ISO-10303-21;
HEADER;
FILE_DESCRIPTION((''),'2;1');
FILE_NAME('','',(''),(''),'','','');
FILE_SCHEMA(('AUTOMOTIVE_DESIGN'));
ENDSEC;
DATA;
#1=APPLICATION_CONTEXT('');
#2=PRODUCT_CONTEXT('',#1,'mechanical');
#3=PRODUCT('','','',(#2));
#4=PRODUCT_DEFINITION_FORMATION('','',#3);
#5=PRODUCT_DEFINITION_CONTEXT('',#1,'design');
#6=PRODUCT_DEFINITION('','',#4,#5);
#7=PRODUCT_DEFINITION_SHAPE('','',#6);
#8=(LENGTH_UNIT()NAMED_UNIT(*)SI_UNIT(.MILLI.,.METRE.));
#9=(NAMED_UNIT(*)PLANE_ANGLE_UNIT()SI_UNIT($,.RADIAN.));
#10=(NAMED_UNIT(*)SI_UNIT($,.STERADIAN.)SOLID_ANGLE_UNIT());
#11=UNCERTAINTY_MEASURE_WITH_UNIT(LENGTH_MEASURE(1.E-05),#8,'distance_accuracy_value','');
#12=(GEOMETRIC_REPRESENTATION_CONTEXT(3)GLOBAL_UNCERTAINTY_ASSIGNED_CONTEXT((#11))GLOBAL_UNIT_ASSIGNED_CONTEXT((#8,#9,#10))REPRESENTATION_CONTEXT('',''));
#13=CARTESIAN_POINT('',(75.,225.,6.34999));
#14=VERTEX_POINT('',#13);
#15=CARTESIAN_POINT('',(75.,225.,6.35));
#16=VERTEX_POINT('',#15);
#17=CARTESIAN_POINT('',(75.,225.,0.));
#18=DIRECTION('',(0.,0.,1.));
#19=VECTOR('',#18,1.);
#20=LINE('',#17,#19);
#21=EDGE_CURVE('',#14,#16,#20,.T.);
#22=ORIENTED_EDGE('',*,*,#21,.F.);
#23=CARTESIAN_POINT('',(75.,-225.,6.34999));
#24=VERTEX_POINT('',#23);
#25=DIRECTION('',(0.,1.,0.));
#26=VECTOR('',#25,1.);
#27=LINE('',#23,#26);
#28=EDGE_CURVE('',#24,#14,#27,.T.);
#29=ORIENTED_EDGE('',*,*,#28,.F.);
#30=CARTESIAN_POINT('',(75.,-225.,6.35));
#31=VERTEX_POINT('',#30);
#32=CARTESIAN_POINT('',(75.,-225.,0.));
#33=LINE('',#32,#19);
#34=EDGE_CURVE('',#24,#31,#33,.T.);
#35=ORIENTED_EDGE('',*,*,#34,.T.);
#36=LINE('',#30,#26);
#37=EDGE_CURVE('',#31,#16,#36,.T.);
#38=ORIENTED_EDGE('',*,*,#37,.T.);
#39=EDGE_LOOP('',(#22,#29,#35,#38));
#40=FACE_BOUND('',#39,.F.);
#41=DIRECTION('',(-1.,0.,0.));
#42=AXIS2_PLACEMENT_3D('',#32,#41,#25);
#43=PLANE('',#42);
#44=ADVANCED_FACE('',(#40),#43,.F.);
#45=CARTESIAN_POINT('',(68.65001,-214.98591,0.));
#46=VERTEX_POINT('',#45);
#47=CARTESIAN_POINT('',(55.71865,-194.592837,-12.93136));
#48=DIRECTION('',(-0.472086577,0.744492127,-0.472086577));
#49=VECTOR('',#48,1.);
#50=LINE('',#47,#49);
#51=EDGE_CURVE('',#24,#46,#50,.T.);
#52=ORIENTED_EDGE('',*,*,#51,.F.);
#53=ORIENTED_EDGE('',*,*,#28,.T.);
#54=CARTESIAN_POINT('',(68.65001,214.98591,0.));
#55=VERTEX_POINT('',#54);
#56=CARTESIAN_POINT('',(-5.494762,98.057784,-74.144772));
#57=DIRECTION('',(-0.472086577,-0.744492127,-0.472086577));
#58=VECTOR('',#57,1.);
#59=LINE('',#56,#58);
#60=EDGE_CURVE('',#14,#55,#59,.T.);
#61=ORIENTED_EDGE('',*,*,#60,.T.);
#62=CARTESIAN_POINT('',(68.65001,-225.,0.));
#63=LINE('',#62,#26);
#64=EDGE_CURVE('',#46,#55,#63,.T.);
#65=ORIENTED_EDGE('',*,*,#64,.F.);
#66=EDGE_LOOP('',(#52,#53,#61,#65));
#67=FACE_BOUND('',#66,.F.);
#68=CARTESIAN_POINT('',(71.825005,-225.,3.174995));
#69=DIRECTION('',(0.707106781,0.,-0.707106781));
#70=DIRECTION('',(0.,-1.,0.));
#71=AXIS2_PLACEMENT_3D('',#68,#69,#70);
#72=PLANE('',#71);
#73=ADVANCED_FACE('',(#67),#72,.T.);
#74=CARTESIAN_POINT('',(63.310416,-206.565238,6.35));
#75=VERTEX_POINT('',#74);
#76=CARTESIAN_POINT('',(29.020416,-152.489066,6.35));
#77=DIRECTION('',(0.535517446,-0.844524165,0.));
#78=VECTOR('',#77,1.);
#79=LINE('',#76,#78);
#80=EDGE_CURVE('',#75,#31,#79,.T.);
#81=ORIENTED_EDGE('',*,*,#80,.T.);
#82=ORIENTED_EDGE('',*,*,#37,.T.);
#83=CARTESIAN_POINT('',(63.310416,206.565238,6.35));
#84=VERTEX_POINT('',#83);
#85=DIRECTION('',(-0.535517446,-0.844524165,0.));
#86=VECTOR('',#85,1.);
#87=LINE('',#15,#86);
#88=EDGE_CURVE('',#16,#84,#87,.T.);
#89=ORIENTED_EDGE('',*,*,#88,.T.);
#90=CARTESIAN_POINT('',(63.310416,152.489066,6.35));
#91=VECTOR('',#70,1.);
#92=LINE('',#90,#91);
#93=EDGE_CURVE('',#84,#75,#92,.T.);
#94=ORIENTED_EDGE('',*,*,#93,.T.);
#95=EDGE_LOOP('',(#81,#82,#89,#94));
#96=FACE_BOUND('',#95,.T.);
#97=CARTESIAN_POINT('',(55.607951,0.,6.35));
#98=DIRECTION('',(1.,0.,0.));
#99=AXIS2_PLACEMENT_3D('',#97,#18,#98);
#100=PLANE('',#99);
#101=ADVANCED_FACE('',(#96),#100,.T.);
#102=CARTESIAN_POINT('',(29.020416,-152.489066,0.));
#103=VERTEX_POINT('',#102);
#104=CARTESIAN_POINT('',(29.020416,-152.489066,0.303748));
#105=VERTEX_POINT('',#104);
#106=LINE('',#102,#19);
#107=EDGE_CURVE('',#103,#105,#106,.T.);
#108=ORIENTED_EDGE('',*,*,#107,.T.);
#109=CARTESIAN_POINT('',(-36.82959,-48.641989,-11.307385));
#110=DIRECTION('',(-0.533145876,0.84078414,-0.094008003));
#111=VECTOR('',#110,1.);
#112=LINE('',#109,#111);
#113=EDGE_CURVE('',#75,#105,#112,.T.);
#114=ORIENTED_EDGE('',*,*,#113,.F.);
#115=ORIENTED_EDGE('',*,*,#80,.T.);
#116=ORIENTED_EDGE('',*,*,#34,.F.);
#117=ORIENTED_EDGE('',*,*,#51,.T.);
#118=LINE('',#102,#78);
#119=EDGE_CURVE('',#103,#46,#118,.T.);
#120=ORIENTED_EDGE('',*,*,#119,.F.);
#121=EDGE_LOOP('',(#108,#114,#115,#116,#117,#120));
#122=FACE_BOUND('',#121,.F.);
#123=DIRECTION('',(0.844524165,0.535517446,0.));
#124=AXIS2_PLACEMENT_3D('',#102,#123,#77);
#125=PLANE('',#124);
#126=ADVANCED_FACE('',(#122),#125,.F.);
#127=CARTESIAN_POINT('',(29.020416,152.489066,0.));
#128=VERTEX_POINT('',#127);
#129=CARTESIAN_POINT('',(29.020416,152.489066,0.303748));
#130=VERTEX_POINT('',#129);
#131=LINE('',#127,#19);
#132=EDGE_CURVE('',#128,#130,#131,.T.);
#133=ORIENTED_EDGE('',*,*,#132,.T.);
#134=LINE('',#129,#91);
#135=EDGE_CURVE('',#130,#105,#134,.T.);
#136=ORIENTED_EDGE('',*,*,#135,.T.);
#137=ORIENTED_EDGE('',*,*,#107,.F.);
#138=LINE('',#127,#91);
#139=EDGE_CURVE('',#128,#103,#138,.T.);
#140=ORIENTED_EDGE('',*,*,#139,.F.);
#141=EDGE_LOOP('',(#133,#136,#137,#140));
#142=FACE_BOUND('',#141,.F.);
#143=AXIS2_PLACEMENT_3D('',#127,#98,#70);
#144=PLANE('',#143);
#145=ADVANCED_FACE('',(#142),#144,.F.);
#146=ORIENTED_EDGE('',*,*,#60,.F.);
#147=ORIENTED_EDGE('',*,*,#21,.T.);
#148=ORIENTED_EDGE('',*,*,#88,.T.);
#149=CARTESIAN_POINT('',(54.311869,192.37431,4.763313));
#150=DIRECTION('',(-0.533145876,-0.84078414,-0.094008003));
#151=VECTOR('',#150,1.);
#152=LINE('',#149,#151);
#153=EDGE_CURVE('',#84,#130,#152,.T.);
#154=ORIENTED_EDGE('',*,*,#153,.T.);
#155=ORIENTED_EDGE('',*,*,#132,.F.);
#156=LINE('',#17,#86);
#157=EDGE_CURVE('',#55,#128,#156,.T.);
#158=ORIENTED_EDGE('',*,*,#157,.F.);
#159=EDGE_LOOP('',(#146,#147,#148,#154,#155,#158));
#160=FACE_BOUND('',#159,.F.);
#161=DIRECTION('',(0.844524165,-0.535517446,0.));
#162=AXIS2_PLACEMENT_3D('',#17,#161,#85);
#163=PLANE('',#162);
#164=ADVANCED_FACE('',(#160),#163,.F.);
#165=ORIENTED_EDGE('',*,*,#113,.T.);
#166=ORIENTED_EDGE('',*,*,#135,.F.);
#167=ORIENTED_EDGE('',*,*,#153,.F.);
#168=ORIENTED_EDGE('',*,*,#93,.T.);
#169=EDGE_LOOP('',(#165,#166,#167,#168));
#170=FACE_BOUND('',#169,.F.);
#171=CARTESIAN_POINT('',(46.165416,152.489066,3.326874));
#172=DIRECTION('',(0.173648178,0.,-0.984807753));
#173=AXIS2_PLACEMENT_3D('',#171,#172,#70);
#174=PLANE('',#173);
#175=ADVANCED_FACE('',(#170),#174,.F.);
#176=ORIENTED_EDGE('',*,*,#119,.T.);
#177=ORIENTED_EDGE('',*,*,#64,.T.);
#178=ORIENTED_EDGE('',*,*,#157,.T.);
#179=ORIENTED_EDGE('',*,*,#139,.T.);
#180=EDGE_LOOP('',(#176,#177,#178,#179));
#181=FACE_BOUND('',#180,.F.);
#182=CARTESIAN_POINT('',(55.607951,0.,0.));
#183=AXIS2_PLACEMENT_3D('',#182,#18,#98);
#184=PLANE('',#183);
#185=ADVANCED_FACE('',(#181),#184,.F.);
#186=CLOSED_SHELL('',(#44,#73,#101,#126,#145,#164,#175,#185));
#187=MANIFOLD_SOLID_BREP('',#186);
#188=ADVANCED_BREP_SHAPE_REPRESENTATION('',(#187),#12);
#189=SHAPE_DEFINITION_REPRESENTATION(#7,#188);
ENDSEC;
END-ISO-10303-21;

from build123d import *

# Parameters (mm, degrees)
F1_DEPTH = 6.35
F2_SIZE  = 6.34999
F3_SIZE2 = 6.0462521685
F3_SIZE  = 34.29


# Not quite as in the source:
# - a fillet or chamfer is up to 0.001 mm smaller than in the source, because OpenCascade refuses the exact size


with BuildPart() as f1:
    # F0 (on Top) → F1 (new body)
    with BuildSketch(Plane.XY):
        Polygon((75, -225), (75, 225), (29.020415619, 152.489066124), (29.020415619, -152.489066124), align=None)
    extrude(amount=F1_DEPTH)

    # F2 (size 6.35 in the source; OpenCascade refuses exactly that, so slightly less here)
    f2_edges = [f1.edges().sort_by_distance(p)[0] for p in [
        (75, 0, 0),
    ]]
    chamfer(f2_edges, length=F2_SIZE)

    # F3
    f3_edges = [f1.edges().sort_by_distance(p)[0] for p in [
        (29.020416, 0, 6.35),
    ]]
    f3_side = f1.faces().sort_by_distance((53.482225, 0, 6.35))[0]
    chamfer(f3_edges, length=F3_SIZE, length2=F3_SIZE2, reference=f3_side)


solid = f1.part
